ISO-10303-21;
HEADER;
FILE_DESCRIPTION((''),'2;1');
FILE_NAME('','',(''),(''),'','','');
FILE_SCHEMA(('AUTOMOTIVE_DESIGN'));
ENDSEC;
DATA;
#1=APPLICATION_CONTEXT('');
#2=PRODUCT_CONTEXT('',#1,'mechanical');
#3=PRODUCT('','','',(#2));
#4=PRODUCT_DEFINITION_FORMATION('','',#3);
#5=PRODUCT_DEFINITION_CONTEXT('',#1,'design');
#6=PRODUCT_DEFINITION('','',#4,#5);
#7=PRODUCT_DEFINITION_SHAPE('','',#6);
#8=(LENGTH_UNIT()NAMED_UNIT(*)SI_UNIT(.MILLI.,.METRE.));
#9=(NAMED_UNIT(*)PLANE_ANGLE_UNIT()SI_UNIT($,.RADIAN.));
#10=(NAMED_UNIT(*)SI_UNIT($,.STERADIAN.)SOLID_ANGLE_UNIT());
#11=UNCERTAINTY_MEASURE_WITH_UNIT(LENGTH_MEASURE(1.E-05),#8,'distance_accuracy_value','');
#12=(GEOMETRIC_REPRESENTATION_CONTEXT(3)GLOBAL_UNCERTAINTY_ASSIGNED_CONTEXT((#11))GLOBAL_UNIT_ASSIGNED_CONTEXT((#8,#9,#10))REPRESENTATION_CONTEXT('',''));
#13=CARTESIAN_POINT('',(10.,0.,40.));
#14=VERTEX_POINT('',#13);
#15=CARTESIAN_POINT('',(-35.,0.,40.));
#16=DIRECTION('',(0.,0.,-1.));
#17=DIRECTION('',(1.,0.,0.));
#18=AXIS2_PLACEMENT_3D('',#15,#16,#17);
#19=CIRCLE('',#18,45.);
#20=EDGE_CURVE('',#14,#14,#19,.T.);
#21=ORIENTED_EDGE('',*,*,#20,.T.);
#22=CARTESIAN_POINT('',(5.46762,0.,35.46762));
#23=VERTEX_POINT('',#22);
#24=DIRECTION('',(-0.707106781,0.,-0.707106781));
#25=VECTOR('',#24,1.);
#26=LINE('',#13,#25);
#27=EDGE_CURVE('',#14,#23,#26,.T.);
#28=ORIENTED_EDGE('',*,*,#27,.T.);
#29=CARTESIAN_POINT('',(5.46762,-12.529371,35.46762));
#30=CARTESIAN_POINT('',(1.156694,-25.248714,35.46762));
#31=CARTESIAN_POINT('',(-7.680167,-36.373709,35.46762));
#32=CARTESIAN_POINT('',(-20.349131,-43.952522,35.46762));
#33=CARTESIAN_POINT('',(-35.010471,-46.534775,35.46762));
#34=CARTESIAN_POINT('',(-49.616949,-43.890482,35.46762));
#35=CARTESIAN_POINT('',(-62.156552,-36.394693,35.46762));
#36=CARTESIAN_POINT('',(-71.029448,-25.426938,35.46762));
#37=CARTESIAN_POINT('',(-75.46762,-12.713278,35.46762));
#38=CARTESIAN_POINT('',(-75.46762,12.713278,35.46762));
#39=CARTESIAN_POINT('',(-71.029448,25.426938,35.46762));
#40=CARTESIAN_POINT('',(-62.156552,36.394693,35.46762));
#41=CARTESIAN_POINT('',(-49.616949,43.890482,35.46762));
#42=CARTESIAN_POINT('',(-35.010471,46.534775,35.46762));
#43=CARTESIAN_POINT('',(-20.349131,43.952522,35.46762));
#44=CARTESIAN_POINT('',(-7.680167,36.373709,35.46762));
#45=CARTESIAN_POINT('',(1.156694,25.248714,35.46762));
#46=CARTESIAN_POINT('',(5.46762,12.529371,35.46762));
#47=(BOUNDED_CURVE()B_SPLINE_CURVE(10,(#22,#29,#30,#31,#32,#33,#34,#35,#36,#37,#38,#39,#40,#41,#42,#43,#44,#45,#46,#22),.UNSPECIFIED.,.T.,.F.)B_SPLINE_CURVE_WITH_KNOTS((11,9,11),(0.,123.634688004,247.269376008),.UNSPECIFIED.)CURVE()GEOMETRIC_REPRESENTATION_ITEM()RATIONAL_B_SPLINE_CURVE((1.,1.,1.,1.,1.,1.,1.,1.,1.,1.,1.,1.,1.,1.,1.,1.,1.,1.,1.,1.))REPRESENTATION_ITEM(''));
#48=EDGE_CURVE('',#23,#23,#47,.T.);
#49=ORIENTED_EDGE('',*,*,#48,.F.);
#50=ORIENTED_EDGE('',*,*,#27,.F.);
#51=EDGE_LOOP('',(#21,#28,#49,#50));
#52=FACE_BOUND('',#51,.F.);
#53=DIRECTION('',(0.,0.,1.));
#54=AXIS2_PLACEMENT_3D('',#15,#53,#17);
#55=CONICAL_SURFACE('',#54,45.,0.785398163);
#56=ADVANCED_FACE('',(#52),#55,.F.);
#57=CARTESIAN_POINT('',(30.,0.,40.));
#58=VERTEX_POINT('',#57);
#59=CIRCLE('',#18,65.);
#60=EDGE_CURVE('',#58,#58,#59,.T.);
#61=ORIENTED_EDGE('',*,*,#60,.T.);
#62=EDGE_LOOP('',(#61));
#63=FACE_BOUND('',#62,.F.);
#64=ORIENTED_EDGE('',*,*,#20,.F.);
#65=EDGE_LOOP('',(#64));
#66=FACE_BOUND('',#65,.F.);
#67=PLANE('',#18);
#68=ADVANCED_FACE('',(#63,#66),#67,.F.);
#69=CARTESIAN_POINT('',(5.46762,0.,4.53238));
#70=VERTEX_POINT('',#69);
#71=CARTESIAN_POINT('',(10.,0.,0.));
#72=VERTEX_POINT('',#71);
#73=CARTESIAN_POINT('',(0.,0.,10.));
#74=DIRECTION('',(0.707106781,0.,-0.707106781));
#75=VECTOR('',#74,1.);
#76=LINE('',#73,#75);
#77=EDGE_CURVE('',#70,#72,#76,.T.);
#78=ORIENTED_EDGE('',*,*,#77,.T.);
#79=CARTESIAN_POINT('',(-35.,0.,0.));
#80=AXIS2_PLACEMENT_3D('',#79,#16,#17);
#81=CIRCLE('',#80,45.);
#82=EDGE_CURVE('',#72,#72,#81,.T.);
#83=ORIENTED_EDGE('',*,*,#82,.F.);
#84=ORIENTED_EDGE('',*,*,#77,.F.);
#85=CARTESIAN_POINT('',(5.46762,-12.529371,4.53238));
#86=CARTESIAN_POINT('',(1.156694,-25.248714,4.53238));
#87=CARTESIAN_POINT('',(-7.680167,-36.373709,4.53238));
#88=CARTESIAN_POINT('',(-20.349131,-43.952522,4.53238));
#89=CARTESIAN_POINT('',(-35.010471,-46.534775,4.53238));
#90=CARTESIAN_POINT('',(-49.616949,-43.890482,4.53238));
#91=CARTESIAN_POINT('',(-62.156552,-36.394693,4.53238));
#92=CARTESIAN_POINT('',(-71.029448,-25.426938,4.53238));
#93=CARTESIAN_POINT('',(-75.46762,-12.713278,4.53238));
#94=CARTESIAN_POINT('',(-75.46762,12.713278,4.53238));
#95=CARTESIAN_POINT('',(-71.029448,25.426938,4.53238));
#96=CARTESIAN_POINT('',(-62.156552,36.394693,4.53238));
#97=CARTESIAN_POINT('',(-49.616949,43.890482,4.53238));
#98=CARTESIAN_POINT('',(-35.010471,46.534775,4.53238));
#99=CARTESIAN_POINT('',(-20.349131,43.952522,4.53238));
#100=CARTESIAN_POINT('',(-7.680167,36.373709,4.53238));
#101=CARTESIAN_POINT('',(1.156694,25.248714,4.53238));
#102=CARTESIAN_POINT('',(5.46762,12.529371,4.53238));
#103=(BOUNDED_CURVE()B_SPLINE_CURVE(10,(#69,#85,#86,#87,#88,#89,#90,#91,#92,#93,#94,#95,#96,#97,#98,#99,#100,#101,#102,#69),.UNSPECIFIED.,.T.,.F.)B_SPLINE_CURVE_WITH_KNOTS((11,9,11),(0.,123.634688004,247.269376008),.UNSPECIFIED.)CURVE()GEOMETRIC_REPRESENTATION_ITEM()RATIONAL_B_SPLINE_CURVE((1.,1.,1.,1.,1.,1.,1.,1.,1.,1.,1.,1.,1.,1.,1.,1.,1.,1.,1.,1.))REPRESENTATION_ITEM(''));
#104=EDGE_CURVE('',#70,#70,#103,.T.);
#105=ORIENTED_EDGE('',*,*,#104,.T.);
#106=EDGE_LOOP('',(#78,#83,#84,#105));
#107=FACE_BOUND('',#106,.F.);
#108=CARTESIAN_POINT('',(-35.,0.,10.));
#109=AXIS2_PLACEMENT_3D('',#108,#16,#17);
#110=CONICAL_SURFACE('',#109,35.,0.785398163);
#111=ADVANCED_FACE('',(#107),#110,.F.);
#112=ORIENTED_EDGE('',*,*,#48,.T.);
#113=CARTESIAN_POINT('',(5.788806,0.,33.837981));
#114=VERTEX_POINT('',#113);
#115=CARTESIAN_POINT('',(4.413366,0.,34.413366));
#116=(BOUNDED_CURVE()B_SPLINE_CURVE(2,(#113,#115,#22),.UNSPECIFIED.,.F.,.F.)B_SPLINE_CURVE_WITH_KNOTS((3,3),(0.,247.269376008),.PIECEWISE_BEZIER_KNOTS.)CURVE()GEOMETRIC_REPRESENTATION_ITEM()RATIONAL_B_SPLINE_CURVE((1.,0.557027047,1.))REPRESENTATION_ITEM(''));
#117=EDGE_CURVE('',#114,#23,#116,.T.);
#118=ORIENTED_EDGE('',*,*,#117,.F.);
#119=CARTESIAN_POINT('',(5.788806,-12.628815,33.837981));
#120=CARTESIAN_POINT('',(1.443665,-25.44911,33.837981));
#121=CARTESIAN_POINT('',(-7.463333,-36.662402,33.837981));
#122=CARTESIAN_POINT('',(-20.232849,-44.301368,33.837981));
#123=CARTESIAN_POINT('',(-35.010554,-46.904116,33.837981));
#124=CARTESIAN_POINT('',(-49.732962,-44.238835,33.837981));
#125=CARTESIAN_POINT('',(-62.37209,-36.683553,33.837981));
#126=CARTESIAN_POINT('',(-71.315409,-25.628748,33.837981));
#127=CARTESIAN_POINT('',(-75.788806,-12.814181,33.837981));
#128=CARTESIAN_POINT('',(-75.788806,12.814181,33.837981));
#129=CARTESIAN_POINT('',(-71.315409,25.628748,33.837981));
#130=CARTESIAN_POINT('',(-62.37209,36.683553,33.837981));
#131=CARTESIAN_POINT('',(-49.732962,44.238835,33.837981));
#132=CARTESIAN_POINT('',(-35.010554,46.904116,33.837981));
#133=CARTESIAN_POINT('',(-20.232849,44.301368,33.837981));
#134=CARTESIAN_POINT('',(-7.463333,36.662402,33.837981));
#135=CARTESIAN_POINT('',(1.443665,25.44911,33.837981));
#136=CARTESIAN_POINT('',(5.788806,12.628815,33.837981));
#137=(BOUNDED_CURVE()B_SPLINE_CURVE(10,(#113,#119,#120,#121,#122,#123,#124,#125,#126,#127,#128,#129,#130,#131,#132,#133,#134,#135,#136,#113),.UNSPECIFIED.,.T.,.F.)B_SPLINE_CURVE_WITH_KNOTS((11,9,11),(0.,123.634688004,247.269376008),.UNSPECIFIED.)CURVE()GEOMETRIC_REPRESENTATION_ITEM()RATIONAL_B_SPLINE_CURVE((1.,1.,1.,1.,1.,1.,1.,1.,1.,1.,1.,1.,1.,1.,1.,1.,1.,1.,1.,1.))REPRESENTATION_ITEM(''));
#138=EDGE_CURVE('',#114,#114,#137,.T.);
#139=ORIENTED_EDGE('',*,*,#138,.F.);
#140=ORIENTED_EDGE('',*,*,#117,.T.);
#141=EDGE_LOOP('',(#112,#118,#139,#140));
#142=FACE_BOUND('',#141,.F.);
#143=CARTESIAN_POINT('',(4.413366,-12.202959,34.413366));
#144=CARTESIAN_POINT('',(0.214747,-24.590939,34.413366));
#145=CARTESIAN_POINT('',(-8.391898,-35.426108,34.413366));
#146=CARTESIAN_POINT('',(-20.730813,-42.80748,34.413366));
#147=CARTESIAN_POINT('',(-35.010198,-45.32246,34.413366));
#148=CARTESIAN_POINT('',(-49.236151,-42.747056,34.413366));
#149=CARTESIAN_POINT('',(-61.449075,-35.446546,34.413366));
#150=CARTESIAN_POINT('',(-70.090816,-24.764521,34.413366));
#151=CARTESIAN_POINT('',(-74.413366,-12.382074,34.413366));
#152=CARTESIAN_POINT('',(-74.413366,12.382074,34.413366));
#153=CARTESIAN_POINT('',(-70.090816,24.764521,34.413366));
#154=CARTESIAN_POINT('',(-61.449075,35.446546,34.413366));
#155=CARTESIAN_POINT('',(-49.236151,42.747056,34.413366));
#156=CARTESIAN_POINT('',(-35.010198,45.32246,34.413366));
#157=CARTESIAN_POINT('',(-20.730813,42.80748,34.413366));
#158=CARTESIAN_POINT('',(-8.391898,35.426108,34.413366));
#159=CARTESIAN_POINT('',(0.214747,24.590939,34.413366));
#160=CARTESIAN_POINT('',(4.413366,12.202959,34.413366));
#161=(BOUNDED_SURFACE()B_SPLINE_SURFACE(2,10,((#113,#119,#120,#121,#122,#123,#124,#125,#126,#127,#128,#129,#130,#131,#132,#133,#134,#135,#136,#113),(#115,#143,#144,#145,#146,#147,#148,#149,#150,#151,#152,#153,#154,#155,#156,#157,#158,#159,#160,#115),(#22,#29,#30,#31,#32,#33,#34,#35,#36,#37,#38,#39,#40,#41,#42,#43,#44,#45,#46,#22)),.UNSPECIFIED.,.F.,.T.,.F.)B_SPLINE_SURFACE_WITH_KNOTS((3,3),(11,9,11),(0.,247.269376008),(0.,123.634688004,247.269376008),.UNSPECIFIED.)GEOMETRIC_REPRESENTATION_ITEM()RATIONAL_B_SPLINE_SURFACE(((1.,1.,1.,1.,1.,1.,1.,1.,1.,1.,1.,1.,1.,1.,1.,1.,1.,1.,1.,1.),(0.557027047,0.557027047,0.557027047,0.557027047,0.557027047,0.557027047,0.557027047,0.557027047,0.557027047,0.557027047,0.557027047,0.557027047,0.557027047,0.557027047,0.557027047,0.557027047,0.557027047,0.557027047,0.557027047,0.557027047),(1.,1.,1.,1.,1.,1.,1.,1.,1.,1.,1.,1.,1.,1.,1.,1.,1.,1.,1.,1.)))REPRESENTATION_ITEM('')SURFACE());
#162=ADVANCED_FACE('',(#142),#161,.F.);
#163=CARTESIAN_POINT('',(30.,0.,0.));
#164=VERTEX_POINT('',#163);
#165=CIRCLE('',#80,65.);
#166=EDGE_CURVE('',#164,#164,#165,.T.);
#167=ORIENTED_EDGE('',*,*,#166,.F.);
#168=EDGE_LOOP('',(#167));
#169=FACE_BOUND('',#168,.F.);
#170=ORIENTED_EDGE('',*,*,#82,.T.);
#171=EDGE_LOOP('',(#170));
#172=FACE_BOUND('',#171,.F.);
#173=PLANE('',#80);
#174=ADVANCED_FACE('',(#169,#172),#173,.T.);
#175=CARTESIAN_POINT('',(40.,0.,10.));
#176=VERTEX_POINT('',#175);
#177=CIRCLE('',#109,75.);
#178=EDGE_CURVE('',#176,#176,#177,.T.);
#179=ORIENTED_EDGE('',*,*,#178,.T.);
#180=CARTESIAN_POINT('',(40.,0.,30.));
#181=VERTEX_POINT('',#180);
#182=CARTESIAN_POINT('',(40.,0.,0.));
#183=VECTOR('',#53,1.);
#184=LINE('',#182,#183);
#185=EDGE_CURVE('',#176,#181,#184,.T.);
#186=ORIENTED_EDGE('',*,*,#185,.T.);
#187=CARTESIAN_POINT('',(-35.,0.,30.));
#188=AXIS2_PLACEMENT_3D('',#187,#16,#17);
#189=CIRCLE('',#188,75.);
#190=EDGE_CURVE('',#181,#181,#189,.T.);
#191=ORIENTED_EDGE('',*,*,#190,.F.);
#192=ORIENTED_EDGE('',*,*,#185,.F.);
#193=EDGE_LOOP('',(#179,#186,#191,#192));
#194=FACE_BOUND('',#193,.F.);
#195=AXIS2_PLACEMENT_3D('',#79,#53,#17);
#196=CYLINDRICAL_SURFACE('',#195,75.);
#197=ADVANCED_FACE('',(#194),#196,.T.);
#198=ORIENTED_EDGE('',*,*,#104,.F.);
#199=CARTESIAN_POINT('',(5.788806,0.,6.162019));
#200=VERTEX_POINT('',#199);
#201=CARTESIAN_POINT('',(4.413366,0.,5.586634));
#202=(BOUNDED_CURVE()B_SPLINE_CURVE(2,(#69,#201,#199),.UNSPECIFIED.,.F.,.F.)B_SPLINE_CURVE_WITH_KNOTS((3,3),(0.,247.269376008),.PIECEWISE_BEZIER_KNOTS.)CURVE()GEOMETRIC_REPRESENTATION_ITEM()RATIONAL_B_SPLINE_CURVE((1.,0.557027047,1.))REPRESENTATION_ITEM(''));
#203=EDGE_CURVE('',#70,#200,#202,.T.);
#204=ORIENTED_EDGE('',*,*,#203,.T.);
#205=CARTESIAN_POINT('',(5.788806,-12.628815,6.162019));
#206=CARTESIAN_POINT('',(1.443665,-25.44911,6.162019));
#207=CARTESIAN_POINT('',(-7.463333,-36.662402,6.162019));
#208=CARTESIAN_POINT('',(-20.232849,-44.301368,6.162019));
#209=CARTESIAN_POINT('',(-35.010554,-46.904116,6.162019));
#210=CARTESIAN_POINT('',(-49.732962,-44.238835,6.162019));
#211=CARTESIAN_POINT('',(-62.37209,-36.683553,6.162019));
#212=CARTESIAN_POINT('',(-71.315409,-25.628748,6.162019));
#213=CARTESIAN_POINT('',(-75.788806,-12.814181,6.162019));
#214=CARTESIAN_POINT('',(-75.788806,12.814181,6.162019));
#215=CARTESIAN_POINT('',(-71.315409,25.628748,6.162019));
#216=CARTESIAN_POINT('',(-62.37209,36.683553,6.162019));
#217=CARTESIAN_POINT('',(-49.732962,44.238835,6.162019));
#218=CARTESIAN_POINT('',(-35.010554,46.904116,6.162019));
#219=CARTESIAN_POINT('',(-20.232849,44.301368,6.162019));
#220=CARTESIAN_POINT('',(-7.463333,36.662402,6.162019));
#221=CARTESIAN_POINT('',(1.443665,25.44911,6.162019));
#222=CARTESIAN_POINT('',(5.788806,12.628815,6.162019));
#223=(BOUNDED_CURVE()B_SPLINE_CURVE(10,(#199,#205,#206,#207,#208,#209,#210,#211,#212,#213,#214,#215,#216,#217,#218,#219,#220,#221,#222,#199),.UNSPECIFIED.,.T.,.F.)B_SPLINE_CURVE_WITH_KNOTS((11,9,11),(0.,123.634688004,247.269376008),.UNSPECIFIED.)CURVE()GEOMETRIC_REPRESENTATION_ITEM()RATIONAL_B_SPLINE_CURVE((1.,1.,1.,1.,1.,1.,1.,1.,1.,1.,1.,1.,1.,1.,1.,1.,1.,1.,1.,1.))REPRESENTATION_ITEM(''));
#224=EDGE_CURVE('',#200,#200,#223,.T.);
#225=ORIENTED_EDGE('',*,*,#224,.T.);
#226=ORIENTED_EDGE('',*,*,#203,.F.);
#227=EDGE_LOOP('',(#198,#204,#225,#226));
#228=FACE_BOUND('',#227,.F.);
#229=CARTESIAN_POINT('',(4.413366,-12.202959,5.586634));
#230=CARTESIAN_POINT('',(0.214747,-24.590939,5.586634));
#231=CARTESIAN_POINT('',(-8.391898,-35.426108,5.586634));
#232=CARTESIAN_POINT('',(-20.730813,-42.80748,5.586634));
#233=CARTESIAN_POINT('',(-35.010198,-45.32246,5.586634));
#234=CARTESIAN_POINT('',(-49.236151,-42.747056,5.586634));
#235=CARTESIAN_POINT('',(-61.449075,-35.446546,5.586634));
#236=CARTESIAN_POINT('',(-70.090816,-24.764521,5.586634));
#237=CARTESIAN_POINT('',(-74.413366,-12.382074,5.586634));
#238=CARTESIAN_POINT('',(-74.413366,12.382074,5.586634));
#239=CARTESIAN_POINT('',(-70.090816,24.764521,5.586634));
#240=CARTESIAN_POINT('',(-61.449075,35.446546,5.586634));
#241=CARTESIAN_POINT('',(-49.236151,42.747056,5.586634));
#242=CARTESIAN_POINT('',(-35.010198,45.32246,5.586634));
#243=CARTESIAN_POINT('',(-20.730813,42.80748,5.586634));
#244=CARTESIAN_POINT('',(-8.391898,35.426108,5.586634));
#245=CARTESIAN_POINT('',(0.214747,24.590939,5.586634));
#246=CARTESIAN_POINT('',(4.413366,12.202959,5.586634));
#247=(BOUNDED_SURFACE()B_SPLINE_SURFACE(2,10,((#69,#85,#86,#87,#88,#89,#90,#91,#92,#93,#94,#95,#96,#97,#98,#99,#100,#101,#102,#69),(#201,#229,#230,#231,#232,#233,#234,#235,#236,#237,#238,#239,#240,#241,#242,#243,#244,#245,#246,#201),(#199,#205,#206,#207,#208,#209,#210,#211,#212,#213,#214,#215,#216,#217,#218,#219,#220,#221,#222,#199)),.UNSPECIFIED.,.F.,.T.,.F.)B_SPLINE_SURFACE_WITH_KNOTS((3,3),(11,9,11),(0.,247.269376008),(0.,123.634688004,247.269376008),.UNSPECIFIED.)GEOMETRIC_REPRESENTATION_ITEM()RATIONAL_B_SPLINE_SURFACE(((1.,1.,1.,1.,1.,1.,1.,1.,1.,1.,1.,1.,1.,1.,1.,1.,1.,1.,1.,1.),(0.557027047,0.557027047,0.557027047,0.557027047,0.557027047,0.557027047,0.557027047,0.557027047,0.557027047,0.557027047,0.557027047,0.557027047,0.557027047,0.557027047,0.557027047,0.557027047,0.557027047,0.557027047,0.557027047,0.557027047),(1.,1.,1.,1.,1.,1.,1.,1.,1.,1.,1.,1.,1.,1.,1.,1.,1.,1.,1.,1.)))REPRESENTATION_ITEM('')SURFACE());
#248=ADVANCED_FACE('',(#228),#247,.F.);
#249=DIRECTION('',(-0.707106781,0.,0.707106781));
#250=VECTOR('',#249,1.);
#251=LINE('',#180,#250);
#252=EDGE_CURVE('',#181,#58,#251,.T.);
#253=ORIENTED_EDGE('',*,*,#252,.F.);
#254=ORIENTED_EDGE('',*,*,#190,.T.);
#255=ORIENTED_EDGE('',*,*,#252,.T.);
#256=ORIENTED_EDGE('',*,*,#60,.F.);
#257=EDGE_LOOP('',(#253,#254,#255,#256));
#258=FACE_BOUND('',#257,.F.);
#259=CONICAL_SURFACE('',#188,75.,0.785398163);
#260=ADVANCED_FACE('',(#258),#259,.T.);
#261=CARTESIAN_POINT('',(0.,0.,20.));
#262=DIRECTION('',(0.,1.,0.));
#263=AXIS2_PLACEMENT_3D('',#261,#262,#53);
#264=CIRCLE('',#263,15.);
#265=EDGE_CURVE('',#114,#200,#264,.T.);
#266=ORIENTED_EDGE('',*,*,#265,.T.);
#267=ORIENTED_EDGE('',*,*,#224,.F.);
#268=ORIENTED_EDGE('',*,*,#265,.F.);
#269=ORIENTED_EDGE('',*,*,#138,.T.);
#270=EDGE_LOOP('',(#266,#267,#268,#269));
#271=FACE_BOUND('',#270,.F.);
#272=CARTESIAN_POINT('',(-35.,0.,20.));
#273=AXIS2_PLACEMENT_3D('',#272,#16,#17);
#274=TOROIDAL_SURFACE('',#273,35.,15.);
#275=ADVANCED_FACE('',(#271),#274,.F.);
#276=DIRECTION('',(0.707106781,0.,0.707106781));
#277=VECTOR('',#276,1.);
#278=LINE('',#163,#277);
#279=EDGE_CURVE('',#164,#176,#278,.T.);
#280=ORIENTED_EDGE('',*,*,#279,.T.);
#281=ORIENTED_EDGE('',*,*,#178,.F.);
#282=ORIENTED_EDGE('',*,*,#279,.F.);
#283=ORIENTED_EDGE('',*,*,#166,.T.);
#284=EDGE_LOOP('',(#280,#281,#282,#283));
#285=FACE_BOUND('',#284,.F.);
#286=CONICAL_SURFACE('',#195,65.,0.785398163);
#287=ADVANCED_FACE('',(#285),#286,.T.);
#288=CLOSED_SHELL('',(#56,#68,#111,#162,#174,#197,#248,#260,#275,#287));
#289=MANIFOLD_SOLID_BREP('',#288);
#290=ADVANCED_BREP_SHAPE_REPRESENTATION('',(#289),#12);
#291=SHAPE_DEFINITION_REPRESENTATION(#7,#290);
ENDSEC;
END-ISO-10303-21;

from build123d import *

# Parameters (mm, degrees)
F3_R = 1


# Not quite as in the source:
# - a fillet or chamfer that OpenCascade refuses, or shapes differently, is made with other operations: its cross-section is extruded or revolved along the edge and cut away or added


with BuildPart() as f1:
    # F0 (on Front) → F1 (revolve)
    with BuildSketch(Plane.XZ):
        with BuildLine():
            Line((0, 5), (0, 0))
            Line((0, 0), (40, 0))
            Line((40, 0), (40, 40))
            Line((40, 40), (0, 40))
            Line((0, 40), (0, 35))
            ThreePointArc((0, 35), (15, 20), (0, 5))
        make_face()
    revolve(axis=Axis((-35, 0, 22.5124461576), (0, 0, -1)))

    # F2: chamfer of 10 on 4 edges, made by hand

    # F2_s1 → F2_t2 (revolve, cut)
    with BuildSketch(Plane.XZ):
        Polygon((30, 0), (40, 10), (40, 0), align=None)
    revolve(axis=Axis((-35, 0, 0), (0, 0, -1)), mode=Mode.SUBTRACT)

    # F2_s3 → F2_t4 (revolve, cut)
    with BuildSketch(Plane.XZ):
        Polygon((40, 30), (30, 40), (40, 40), align=None)
    revolve(axis=Axis((-35, 0, 40), (0, 0, -1)), mode=Mode.SUBTRACT)

    # F2_s5 → F2_t6 (revolve, cut)
    with BuildSketch(Plane.XZ):
        Polygon((0, 10), (10, 0), (0, 0), align=None)
    revolve(axis=Axis((-35, 0, 0), (0, 0, -1)), mode=Mode.SUBTRACT)

    # F2_s7 → F2_t8 (revolve, cut)
    with BuildSketch(Plane.XZ):
        Polygon((10, 40), (0, 30), (0, 40), align=None)
    revolve(axis=Axis((-35, 0, 40), (0, 0, -1)), mode=Mode.SUBTRACT)

    # F3
    f3_edges = [f1.edges().sort_by_distance(p)[0] for p in [
        (-74.354143, 0, 34.354143),
        (-74.354143, 0, 5.645857),
    ]]
    fillet(f3_edges, radius=F3_R)


solid = f1.part
